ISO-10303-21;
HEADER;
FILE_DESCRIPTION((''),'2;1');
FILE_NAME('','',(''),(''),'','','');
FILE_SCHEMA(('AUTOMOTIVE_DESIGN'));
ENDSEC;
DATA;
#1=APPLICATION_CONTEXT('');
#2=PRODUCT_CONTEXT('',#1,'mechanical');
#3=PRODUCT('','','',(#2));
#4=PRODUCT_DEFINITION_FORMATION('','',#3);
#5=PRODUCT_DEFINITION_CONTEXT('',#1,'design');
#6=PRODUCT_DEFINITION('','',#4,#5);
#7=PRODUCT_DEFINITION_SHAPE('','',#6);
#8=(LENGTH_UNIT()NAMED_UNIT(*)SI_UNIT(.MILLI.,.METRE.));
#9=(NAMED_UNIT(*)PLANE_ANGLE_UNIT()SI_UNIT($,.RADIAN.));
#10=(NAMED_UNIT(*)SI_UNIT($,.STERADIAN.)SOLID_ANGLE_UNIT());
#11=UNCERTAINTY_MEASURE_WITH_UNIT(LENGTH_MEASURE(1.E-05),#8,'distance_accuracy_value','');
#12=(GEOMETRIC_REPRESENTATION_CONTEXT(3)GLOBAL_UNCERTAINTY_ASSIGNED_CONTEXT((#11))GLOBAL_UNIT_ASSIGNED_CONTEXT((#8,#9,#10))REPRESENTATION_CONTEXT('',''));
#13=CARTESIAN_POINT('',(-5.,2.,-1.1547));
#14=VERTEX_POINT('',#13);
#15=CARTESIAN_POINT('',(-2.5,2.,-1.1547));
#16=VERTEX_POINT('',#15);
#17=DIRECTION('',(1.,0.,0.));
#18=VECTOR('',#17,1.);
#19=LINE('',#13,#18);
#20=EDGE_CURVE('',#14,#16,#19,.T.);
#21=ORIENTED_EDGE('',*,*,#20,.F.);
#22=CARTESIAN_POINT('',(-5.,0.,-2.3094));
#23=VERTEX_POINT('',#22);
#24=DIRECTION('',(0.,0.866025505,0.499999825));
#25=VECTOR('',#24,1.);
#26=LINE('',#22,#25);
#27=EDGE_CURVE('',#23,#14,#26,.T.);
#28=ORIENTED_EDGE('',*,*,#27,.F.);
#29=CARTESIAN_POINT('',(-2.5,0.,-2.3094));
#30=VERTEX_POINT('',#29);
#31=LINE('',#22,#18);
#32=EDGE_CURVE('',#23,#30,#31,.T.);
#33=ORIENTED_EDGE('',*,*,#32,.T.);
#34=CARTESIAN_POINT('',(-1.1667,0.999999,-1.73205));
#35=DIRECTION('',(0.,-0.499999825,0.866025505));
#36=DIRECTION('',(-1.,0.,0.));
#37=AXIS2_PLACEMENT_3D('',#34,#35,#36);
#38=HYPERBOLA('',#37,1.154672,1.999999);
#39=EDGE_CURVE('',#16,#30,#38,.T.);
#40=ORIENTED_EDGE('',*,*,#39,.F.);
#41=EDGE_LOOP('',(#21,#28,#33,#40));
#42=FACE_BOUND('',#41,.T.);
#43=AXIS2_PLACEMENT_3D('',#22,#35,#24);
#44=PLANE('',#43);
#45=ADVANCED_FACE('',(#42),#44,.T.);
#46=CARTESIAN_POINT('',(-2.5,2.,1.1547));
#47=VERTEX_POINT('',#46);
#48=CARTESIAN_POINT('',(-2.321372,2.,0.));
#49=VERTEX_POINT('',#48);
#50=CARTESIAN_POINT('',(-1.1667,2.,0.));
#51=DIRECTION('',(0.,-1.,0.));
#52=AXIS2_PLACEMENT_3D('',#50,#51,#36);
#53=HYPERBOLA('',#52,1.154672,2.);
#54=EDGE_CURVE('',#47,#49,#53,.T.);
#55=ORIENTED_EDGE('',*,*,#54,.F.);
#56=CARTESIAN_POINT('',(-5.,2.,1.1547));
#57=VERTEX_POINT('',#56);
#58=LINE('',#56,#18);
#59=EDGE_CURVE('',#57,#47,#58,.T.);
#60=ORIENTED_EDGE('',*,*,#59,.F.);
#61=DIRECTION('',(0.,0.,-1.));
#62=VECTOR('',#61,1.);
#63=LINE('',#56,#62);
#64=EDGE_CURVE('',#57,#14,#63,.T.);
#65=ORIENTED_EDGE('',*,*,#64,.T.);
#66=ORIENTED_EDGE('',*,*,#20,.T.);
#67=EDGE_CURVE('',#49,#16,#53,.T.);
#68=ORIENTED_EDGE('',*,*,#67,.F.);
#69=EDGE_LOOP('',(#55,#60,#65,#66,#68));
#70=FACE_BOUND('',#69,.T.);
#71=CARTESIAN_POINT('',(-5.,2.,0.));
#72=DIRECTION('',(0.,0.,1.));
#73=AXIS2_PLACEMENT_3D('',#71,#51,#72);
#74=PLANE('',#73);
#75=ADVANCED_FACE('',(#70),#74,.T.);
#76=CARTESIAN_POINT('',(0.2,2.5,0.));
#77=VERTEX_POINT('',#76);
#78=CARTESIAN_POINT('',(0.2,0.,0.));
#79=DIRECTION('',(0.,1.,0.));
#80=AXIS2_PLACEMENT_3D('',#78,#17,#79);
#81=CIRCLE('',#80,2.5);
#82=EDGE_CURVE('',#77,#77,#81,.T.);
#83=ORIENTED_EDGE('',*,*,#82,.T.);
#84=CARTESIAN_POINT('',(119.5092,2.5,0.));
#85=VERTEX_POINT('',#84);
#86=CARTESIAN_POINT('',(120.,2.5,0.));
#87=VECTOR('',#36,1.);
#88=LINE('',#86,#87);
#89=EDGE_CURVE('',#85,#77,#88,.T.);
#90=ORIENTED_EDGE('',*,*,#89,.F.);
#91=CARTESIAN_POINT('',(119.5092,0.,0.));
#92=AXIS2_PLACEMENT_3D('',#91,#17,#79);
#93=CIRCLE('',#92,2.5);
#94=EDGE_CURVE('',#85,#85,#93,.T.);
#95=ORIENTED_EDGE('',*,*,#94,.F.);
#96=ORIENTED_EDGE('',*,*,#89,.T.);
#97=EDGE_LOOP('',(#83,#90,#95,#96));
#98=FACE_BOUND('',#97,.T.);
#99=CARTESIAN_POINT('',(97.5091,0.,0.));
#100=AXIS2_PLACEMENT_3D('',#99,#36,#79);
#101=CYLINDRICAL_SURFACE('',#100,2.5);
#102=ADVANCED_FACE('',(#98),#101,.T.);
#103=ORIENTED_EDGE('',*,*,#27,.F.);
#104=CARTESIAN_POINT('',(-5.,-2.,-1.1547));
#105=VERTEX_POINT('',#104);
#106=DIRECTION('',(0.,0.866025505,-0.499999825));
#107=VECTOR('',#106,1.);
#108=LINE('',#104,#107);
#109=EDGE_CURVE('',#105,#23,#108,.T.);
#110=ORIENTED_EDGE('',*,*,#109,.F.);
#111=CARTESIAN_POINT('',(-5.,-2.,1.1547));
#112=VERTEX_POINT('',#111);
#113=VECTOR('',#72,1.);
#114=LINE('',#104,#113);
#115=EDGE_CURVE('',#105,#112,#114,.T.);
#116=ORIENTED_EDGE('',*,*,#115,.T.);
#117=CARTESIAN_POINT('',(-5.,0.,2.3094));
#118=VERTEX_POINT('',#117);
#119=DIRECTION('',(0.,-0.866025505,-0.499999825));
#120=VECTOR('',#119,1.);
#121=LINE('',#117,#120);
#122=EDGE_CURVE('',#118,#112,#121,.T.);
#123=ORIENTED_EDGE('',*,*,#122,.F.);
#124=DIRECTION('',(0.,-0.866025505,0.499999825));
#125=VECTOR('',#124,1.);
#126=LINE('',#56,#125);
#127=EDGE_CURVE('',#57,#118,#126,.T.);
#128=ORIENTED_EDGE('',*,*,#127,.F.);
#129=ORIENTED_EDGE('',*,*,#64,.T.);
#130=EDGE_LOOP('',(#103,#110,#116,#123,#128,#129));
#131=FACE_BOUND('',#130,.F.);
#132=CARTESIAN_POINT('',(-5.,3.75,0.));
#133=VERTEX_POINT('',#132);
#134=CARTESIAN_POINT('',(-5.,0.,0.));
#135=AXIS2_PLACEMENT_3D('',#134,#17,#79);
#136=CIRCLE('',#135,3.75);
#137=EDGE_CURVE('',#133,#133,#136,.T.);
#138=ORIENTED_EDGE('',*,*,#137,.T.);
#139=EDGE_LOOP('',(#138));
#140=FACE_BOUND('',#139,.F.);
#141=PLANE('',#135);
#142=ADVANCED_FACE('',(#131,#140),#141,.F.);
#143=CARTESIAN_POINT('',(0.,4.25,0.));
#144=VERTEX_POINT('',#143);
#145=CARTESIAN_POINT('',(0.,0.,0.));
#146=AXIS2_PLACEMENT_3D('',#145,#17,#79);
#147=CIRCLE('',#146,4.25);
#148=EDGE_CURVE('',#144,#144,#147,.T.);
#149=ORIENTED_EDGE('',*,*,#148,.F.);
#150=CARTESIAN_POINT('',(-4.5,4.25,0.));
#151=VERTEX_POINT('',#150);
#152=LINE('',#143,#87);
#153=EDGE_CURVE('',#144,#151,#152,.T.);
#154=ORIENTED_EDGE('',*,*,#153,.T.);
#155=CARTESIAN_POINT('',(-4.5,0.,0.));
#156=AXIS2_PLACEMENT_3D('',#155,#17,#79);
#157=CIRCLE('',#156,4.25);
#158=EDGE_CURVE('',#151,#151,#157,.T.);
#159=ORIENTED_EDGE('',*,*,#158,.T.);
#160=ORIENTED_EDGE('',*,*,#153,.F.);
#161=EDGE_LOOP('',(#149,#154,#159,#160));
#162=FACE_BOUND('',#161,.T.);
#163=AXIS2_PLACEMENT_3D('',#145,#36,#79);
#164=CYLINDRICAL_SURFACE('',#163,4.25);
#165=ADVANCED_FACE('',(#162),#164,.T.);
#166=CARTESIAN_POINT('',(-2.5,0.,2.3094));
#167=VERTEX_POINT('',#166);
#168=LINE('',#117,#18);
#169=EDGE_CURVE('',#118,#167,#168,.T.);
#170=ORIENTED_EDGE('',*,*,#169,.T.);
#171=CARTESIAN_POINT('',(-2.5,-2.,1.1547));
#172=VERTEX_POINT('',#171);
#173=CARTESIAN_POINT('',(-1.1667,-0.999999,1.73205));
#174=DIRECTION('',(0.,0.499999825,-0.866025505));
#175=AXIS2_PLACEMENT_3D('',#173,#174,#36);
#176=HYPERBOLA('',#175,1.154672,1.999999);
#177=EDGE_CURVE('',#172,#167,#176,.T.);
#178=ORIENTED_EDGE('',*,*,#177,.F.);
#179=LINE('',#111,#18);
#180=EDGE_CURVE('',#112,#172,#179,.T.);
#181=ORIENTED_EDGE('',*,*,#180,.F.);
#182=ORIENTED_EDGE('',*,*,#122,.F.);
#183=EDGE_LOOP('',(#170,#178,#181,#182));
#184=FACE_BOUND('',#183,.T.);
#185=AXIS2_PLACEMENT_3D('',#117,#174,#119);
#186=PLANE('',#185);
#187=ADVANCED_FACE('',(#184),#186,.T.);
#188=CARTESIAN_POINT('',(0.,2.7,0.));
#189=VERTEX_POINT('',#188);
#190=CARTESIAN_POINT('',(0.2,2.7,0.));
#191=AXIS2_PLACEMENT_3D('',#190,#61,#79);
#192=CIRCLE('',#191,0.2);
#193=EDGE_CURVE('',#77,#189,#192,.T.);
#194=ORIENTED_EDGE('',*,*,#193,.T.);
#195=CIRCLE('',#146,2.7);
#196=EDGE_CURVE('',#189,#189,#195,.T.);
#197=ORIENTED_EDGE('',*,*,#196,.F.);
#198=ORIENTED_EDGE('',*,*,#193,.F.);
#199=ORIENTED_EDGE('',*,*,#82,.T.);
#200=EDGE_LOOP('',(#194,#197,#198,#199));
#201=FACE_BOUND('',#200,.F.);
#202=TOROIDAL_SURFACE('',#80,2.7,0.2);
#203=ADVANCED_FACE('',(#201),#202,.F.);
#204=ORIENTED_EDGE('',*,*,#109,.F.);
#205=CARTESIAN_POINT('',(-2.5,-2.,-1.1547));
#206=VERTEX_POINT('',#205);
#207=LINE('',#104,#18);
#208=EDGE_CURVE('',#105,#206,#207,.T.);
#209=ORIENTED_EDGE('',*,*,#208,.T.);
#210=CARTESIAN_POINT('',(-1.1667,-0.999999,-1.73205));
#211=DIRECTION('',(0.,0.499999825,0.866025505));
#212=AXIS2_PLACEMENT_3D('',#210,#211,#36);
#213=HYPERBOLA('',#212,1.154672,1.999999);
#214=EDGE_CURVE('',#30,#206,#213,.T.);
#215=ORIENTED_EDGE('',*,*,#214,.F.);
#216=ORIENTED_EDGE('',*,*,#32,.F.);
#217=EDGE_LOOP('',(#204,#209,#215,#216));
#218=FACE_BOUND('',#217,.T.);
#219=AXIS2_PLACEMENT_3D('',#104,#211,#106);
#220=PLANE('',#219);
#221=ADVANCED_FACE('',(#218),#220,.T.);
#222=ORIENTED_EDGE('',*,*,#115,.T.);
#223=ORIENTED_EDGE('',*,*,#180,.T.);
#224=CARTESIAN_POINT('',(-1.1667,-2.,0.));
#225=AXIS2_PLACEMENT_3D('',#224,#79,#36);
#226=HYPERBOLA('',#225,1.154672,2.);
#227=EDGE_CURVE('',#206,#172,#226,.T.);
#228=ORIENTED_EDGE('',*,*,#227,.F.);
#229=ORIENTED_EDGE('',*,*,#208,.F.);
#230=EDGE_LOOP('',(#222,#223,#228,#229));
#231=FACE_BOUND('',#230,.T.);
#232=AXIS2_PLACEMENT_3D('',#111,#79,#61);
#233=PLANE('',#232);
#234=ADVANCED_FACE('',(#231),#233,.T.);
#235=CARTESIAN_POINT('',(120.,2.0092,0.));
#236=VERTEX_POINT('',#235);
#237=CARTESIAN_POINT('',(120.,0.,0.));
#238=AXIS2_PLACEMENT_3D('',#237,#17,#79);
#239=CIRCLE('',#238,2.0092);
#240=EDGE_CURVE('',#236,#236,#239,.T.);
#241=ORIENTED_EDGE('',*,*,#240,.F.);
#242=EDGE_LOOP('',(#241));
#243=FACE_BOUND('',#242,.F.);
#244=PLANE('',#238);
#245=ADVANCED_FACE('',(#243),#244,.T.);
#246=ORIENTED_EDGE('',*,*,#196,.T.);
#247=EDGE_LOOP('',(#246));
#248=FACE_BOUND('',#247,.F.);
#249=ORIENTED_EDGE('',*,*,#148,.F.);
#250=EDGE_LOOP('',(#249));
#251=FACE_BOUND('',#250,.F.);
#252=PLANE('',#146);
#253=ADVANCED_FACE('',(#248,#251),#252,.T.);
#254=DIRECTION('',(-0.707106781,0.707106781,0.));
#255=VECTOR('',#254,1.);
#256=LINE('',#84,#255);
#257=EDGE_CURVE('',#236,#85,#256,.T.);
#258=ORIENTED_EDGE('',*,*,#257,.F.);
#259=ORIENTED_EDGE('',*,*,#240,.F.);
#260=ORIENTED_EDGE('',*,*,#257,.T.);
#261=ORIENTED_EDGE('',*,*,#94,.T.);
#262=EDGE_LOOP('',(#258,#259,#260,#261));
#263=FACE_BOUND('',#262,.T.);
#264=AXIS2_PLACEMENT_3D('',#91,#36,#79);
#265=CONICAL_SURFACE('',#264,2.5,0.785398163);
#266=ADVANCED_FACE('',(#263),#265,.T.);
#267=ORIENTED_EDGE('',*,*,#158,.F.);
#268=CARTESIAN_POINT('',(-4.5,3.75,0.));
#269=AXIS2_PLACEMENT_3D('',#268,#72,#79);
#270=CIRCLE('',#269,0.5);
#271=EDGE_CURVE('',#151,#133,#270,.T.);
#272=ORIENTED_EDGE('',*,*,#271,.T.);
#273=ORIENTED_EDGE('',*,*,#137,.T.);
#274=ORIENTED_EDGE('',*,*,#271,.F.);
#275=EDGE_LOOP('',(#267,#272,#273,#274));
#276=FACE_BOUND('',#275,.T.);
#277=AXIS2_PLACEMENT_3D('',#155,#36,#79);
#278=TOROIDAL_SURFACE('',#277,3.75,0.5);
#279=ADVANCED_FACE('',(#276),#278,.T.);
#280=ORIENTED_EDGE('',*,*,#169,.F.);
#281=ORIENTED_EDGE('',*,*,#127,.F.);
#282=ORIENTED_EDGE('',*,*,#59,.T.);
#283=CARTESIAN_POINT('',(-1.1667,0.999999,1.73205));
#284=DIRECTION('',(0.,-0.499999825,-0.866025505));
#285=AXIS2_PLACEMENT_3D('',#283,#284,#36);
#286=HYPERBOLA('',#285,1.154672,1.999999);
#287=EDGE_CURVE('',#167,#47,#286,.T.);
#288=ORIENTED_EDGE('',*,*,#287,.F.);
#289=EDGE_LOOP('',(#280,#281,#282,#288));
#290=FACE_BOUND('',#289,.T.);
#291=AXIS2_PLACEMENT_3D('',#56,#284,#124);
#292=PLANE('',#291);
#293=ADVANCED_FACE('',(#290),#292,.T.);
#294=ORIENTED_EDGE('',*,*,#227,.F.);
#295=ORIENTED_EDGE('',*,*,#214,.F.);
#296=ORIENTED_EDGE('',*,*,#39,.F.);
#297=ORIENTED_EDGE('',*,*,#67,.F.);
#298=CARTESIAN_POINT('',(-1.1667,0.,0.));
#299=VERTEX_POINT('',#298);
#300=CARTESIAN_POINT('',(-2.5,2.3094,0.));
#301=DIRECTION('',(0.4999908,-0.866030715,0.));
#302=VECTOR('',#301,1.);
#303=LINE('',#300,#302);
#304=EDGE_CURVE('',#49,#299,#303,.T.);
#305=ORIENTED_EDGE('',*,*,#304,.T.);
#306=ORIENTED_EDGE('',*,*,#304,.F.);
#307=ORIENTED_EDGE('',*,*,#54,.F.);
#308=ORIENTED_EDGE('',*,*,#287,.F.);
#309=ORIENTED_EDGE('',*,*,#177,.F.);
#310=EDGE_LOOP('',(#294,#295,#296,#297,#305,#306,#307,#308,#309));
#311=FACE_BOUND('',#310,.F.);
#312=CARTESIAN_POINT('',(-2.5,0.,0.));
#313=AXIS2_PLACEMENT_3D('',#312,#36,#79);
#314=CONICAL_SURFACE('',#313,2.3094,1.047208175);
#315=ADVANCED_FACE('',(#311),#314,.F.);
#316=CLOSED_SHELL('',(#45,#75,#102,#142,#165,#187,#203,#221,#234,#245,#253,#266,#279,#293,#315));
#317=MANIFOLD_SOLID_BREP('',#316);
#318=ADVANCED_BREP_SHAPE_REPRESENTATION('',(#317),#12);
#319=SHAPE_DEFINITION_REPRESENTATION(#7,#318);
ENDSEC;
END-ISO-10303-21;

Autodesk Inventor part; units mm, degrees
ref_plane "YZ Plane" through (0, 0, 0) normal (1, 0, 0) x (0, 1, 0)
ref_plane "XZ Plane" through (0, 0, 0) normal (0, 1, 0) x (-1, 0, 0)
sketch "Sketch1" plane through (0, 0, 0) normal (0, 0, 1) x (1, 0, 0)
  line L0 (-1.1667, 0) -> (120, 0)
  line L1 (120, 0) -> (120, 2.5)
  line L2 (120, 2.5) -> (98, 2.5)
  line L3 (98, 2.5) -> (97.5091, 2.5)
  line L4 (97.5091, 2.5) -> (0, 2.5)
  line L5 (0, 2.5) -> (0, 4.25)
  line L6 (0, 4.25) -> (-5, 4.25)
  line L7 (-5, 4.25) -> (-5, 2.3094)
  line L8 (-5, 2.3094) -> (-2.5, 2.3094)
  line L9 (-2.5, 2.3094) -> (-1.1667, 0)
  line L10 (-22, 0) -> (97, 0) projected
  line L11 (0, -0.85) -> (0, 5.1) projected
  line L12 (98, 2.5) -> (0, 2.5) construction
  dimension "d1" = 22
  dimension "d2" = 0.4909
  dimension "d3" = 5
  dimension "d4" = 2.5
  dimension "d5" = 60
  dimension "d6" = 5
  dimension "d7" = 5
  dimension "d8" = 4.6188
  dimension "d9" = 8.5
  dimension "d26" = 120
revolve "Body" add sketch "Sketch1" angle 360 about axis through (-1.1667, 0, 0) along (1, 0, 0)
sketch "Sketch2" plane through (-5, 0, 0) normal (-1, 0, 0) x (0, 0, 1)
  circle A0 centre (0, 0) radius 2.3094 projected
  line L0 (0, -5.95) -> (0, 5.95) projected
  line L1 (-5.95, 0) -> (5.95, 0) projected
  line L2 (2.3094, 0) -> (1.1547, -2)
  line L3 (1.1547, -2) -> (-1.1547, -2)
  line L4 (-1.1547, -2) -> (-2.3094, 0)
  line L5 (-2.3094, 0) -> (-1.1547, 2)
  line L6 (-1.1547, 2) -> (1.1547, 2)
  line L7 (1.1547, 2) -> (2.3094, 0)
extrude "Slot" add sketch "Sketch2" against normal up to next contours L7 A0 | A0 L2 | L6 L0 A0 | A0 L0 L3 | L0 L6 A0 | A0 L3 L0 | L4 A0 | A0 L5
fillet "Fillet1" radius 0.5 1 edges at (-5, -4.25, 0)
thread "Thread" size "M5x0.8" class "6g" standard "ISO Metric profile" length 22
chamfer "Chamfer1" distance 0.4908 distance2 0.4908 1 edges at (120, -2.5, 0) measured on face at (120, -0.6238, 0.5526)
ref_plane "Work Plane1" through (29, 0, 0) normal (0, -1, 0) x (1, 0, 0)
fillet "Fillet2" radius 0.2 1 edges at (0, -2.5, 0)
equation "\"d30\" = R"
equation "\"d17\" = RR"
equation "\"d13\" = GEL"
equation "\"d15\" = -0.5 * SPD + 0.5 * GD"
equation "\"d16\" = GUL"
equation "\"d1\" = GEL"
equation "\"d3\" = KOH"
equation "\"d4\" = INTI"
equation "\"d6\" = GD"
equation "\"d7\" = BDM"
equation "\"d8\" = 1.1547 * SW"
equation "\"d9\" = KOD"
equation "\"d26\" = NLG"
equation "\"GD\" = NND"
equation "\"NLG\" = 120"
equation "\"GEL\" = 22"
equation "\"KOD\" = 8.5"
equation "\"KOH\" = 5"
equation "\"INTI\" = 2.5"
equation "\"GAL\" = 0.61345 * PTC"
equation "\"GUL\" = 0.61345 * PTC"
equation "\"BDM\" = NND"
equation "\"SW\" = 4"
equation "\"RR\" = 0.5"
equation "\"SPD\" = NND - 1.2269 * PTC"
equation "\"R\" = 0.2"
equation "\"TOA\" = 30deg"
equation "\"GD1\" = THREADDIA - 1.2269 * PTC"
equation "\"THREADDIA\" = 5"
equation "\"FAWI\" = 45deg"
equation "\"ANG\" = 120deg"
equation "\"PTC\" = 0.8"
equation "\"NND\" = 5"
equation "\"E0\" = 1.155 * SW"
properties material "Steel, Mild"
